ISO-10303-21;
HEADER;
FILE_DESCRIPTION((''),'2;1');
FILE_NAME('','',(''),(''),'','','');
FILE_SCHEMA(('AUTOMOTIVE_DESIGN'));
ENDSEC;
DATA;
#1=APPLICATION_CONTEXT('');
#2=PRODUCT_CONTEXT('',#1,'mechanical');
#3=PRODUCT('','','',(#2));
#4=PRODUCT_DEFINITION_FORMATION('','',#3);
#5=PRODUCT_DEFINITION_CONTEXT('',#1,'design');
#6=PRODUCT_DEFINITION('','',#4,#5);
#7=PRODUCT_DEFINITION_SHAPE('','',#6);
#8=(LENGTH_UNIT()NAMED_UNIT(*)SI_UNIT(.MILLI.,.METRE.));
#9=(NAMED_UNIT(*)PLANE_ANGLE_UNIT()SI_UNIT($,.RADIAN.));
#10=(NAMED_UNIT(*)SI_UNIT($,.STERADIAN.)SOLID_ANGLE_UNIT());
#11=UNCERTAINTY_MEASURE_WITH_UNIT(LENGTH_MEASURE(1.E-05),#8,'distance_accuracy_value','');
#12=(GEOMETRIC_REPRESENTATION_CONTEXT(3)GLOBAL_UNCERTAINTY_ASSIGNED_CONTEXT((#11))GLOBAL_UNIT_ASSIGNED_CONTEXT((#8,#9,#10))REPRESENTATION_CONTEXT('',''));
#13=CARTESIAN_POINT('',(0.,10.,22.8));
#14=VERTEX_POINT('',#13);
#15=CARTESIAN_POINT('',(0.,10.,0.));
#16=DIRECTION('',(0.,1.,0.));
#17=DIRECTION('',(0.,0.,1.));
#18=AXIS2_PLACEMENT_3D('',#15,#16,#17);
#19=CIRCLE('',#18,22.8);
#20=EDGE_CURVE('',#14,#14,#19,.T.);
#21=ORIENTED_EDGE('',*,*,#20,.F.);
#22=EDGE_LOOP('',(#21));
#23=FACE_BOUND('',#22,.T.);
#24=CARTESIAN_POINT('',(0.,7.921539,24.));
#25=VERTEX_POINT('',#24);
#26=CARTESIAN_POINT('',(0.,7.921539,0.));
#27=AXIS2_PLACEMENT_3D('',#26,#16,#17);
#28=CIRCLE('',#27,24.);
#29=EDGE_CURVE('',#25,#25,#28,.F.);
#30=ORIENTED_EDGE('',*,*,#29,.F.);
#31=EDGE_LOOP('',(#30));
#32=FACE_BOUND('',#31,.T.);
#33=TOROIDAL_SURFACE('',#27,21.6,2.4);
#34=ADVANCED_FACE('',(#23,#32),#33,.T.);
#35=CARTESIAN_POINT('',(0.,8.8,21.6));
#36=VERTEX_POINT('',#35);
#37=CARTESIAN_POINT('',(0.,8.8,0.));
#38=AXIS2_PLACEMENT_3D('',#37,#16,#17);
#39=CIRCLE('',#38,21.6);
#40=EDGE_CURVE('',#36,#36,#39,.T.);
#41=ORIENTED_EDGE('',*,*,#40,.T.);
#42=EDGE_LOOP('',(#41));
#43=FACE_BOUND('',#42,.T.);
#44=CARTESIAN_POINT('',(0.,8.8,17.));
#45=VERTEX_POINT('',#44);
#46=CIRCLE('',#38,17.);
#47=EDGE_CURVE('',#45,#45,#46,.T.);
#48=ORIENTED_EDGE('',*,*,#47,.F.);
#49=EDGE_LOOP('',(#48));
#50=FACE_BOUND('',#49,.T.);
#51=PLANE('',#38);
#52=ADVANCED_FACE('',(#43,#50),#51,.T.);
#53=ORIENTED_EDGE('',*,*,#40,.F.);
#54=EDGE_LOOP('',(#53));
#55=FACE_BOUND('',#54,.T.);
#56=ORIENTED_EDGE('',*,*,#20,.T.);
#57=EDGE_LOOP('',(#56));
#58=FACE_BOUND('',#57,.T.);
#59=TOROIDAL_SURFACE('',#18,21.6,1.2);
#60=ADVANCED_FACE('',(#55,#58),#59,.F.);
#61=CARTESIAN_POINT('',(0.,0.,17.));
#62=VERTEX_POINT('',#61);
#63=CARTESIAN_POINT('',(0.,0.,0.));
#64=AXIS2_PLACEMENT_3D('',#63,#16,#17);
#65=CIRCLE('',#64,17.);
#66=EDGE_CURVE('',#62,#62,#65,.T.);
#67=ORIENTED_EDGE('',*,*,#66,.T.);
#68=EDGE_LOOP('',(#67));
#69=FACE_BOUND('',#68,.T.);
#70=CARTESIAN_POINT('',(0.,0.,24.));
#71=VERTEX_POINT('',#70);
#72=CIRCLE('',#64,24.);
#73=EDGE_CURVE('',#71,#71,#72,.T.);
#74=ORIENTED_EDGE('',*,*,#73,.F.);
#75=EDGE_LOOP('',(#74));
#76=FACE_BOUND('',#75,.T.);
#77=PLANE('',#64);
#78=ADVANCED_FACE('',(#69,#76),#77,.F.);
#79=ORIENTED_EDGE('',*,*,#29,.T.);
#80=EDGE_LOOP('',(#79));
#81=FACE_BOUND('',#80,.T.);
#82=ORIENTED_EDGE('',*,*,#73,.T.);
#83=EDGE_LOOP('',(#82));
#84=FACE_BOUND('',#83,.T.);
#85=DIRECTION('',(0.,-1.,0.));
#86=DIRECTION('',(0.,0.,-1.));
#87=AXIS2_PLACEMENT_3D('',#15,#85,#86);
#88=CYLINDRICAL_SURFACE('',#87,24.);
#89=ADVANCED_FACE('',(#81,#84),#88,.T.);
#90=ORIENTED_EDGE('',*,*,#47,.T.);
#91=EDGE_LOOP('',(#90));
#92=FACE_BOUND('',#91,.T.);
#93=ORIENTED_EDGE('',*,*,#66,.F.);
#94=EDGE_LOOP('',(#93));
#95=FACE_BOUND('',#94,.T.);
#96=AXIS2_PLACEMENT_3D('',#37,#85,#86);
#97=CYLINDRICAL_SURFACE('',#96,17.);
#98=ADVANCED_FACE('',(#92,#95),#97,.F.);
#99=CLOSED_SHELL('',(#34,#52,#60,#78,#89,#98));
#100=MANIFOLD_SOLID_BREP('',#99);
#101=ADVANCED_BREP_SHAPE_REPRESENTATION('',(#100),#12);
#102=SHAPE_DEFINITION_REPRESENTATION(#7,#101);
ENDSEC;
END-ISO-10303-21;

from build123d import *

# Parameters (mm, degrees)
SKETCH1_R           = 22.8
SKETCH1_R_2         = 17
BOSS_EXTRUDE4_DEPTH = 8.8
BOSS_EXTRUDE6_DEPTH = 10
FILLET1_R           = 1.2
FILLET2_R           = 2.4


# Some blends are built 0.0001 mm under size
with BuildPart() as part:
    # Sketch1 → Boss-Extrude4 (new body)
    with BuildSketch(Plane(origin=(0, 0, 0), x_dir=(1, 0, 0), z_dir=(0, 1, 0))):
        with Locations(Location((0, 0, 0), (0, 0, 270))):
            Circle(SKETCH1_R)
        with Locations(Location((0, 0, 0), (0, 0, 270))):
            Circle(SKETCH1_R_2, mode=Mode.SUBTRACT)
    extrude(amount=BOSS_EXTRUDE4_DEPTH)

    # Sketch1<7> → Boss-Extrude6 (add)
    with BuildSketch(Plane(origin=(0, 0, 0), x_dir=(1, 0, 0), z_dir=(0, 1, 0))):
        with BuildLine():
            ThreePointArc((24, 0), (0, 24), (-24, 0))
            Line((-24, 0), (-22.8, 0))
            ThreePointArc((-22.8, 0), (0, 22.8), (22.8, 0))
            Line((22.8, 0), (24, 0))
        make_face()
        with BuildLine():
            Line((-22.8, 0), (-24, 0))
            ThreePointArc((-24, 0), (0, -24), (24, 0))
            Line((24, 0), (22.8, 0))
            ThreePointArc((22.8, 0), (0, -22.8), (-22.8, 0))
        make_face()
    extrude(amount=BOSS_EXTRUDE6_DEPTH)

    # Fillet1
    fillet1_edges = [part.edges().sort_by_distance(p)[0] for p in [
        (-22.8, 8.8, 0),
    ]]
    fillet(fillet1_edges, radius=FILLET1_R - 0.0001)  # a hair under: the kernel refuses the full size

    # Fillet2
    # the kernel refuses this fillet: 2.4 mm, written as the material it takes off along each edge
    with BuildSketch(Plane(origin=(0, 10, 0), x_dir=(1, 0, 0), z_dir=(0, 0, 1))) as fillet2_piece_1:
        with BuildLine():
            CenterArc((21.6, -2.078460969), FILLET2_R, 0, 60)
            Line((24, -2.078460969), (24.048, -2.078460969))
            Line((24.048, -2.078460969), (24.048, 0))
            Line((24.048, 0), (24, 0.048))
            ThreePointArc((24, 0.048), (23.4, 0.048), (22.824, 0.041569219))
            Line((22.824, 0.041569219), (22.8, 0))
        make_face()
    revolve(axis=Axis((0, 10, 0), (0, 1, 0)), mode=Mode.SUBTRACT)


solid = part.part
